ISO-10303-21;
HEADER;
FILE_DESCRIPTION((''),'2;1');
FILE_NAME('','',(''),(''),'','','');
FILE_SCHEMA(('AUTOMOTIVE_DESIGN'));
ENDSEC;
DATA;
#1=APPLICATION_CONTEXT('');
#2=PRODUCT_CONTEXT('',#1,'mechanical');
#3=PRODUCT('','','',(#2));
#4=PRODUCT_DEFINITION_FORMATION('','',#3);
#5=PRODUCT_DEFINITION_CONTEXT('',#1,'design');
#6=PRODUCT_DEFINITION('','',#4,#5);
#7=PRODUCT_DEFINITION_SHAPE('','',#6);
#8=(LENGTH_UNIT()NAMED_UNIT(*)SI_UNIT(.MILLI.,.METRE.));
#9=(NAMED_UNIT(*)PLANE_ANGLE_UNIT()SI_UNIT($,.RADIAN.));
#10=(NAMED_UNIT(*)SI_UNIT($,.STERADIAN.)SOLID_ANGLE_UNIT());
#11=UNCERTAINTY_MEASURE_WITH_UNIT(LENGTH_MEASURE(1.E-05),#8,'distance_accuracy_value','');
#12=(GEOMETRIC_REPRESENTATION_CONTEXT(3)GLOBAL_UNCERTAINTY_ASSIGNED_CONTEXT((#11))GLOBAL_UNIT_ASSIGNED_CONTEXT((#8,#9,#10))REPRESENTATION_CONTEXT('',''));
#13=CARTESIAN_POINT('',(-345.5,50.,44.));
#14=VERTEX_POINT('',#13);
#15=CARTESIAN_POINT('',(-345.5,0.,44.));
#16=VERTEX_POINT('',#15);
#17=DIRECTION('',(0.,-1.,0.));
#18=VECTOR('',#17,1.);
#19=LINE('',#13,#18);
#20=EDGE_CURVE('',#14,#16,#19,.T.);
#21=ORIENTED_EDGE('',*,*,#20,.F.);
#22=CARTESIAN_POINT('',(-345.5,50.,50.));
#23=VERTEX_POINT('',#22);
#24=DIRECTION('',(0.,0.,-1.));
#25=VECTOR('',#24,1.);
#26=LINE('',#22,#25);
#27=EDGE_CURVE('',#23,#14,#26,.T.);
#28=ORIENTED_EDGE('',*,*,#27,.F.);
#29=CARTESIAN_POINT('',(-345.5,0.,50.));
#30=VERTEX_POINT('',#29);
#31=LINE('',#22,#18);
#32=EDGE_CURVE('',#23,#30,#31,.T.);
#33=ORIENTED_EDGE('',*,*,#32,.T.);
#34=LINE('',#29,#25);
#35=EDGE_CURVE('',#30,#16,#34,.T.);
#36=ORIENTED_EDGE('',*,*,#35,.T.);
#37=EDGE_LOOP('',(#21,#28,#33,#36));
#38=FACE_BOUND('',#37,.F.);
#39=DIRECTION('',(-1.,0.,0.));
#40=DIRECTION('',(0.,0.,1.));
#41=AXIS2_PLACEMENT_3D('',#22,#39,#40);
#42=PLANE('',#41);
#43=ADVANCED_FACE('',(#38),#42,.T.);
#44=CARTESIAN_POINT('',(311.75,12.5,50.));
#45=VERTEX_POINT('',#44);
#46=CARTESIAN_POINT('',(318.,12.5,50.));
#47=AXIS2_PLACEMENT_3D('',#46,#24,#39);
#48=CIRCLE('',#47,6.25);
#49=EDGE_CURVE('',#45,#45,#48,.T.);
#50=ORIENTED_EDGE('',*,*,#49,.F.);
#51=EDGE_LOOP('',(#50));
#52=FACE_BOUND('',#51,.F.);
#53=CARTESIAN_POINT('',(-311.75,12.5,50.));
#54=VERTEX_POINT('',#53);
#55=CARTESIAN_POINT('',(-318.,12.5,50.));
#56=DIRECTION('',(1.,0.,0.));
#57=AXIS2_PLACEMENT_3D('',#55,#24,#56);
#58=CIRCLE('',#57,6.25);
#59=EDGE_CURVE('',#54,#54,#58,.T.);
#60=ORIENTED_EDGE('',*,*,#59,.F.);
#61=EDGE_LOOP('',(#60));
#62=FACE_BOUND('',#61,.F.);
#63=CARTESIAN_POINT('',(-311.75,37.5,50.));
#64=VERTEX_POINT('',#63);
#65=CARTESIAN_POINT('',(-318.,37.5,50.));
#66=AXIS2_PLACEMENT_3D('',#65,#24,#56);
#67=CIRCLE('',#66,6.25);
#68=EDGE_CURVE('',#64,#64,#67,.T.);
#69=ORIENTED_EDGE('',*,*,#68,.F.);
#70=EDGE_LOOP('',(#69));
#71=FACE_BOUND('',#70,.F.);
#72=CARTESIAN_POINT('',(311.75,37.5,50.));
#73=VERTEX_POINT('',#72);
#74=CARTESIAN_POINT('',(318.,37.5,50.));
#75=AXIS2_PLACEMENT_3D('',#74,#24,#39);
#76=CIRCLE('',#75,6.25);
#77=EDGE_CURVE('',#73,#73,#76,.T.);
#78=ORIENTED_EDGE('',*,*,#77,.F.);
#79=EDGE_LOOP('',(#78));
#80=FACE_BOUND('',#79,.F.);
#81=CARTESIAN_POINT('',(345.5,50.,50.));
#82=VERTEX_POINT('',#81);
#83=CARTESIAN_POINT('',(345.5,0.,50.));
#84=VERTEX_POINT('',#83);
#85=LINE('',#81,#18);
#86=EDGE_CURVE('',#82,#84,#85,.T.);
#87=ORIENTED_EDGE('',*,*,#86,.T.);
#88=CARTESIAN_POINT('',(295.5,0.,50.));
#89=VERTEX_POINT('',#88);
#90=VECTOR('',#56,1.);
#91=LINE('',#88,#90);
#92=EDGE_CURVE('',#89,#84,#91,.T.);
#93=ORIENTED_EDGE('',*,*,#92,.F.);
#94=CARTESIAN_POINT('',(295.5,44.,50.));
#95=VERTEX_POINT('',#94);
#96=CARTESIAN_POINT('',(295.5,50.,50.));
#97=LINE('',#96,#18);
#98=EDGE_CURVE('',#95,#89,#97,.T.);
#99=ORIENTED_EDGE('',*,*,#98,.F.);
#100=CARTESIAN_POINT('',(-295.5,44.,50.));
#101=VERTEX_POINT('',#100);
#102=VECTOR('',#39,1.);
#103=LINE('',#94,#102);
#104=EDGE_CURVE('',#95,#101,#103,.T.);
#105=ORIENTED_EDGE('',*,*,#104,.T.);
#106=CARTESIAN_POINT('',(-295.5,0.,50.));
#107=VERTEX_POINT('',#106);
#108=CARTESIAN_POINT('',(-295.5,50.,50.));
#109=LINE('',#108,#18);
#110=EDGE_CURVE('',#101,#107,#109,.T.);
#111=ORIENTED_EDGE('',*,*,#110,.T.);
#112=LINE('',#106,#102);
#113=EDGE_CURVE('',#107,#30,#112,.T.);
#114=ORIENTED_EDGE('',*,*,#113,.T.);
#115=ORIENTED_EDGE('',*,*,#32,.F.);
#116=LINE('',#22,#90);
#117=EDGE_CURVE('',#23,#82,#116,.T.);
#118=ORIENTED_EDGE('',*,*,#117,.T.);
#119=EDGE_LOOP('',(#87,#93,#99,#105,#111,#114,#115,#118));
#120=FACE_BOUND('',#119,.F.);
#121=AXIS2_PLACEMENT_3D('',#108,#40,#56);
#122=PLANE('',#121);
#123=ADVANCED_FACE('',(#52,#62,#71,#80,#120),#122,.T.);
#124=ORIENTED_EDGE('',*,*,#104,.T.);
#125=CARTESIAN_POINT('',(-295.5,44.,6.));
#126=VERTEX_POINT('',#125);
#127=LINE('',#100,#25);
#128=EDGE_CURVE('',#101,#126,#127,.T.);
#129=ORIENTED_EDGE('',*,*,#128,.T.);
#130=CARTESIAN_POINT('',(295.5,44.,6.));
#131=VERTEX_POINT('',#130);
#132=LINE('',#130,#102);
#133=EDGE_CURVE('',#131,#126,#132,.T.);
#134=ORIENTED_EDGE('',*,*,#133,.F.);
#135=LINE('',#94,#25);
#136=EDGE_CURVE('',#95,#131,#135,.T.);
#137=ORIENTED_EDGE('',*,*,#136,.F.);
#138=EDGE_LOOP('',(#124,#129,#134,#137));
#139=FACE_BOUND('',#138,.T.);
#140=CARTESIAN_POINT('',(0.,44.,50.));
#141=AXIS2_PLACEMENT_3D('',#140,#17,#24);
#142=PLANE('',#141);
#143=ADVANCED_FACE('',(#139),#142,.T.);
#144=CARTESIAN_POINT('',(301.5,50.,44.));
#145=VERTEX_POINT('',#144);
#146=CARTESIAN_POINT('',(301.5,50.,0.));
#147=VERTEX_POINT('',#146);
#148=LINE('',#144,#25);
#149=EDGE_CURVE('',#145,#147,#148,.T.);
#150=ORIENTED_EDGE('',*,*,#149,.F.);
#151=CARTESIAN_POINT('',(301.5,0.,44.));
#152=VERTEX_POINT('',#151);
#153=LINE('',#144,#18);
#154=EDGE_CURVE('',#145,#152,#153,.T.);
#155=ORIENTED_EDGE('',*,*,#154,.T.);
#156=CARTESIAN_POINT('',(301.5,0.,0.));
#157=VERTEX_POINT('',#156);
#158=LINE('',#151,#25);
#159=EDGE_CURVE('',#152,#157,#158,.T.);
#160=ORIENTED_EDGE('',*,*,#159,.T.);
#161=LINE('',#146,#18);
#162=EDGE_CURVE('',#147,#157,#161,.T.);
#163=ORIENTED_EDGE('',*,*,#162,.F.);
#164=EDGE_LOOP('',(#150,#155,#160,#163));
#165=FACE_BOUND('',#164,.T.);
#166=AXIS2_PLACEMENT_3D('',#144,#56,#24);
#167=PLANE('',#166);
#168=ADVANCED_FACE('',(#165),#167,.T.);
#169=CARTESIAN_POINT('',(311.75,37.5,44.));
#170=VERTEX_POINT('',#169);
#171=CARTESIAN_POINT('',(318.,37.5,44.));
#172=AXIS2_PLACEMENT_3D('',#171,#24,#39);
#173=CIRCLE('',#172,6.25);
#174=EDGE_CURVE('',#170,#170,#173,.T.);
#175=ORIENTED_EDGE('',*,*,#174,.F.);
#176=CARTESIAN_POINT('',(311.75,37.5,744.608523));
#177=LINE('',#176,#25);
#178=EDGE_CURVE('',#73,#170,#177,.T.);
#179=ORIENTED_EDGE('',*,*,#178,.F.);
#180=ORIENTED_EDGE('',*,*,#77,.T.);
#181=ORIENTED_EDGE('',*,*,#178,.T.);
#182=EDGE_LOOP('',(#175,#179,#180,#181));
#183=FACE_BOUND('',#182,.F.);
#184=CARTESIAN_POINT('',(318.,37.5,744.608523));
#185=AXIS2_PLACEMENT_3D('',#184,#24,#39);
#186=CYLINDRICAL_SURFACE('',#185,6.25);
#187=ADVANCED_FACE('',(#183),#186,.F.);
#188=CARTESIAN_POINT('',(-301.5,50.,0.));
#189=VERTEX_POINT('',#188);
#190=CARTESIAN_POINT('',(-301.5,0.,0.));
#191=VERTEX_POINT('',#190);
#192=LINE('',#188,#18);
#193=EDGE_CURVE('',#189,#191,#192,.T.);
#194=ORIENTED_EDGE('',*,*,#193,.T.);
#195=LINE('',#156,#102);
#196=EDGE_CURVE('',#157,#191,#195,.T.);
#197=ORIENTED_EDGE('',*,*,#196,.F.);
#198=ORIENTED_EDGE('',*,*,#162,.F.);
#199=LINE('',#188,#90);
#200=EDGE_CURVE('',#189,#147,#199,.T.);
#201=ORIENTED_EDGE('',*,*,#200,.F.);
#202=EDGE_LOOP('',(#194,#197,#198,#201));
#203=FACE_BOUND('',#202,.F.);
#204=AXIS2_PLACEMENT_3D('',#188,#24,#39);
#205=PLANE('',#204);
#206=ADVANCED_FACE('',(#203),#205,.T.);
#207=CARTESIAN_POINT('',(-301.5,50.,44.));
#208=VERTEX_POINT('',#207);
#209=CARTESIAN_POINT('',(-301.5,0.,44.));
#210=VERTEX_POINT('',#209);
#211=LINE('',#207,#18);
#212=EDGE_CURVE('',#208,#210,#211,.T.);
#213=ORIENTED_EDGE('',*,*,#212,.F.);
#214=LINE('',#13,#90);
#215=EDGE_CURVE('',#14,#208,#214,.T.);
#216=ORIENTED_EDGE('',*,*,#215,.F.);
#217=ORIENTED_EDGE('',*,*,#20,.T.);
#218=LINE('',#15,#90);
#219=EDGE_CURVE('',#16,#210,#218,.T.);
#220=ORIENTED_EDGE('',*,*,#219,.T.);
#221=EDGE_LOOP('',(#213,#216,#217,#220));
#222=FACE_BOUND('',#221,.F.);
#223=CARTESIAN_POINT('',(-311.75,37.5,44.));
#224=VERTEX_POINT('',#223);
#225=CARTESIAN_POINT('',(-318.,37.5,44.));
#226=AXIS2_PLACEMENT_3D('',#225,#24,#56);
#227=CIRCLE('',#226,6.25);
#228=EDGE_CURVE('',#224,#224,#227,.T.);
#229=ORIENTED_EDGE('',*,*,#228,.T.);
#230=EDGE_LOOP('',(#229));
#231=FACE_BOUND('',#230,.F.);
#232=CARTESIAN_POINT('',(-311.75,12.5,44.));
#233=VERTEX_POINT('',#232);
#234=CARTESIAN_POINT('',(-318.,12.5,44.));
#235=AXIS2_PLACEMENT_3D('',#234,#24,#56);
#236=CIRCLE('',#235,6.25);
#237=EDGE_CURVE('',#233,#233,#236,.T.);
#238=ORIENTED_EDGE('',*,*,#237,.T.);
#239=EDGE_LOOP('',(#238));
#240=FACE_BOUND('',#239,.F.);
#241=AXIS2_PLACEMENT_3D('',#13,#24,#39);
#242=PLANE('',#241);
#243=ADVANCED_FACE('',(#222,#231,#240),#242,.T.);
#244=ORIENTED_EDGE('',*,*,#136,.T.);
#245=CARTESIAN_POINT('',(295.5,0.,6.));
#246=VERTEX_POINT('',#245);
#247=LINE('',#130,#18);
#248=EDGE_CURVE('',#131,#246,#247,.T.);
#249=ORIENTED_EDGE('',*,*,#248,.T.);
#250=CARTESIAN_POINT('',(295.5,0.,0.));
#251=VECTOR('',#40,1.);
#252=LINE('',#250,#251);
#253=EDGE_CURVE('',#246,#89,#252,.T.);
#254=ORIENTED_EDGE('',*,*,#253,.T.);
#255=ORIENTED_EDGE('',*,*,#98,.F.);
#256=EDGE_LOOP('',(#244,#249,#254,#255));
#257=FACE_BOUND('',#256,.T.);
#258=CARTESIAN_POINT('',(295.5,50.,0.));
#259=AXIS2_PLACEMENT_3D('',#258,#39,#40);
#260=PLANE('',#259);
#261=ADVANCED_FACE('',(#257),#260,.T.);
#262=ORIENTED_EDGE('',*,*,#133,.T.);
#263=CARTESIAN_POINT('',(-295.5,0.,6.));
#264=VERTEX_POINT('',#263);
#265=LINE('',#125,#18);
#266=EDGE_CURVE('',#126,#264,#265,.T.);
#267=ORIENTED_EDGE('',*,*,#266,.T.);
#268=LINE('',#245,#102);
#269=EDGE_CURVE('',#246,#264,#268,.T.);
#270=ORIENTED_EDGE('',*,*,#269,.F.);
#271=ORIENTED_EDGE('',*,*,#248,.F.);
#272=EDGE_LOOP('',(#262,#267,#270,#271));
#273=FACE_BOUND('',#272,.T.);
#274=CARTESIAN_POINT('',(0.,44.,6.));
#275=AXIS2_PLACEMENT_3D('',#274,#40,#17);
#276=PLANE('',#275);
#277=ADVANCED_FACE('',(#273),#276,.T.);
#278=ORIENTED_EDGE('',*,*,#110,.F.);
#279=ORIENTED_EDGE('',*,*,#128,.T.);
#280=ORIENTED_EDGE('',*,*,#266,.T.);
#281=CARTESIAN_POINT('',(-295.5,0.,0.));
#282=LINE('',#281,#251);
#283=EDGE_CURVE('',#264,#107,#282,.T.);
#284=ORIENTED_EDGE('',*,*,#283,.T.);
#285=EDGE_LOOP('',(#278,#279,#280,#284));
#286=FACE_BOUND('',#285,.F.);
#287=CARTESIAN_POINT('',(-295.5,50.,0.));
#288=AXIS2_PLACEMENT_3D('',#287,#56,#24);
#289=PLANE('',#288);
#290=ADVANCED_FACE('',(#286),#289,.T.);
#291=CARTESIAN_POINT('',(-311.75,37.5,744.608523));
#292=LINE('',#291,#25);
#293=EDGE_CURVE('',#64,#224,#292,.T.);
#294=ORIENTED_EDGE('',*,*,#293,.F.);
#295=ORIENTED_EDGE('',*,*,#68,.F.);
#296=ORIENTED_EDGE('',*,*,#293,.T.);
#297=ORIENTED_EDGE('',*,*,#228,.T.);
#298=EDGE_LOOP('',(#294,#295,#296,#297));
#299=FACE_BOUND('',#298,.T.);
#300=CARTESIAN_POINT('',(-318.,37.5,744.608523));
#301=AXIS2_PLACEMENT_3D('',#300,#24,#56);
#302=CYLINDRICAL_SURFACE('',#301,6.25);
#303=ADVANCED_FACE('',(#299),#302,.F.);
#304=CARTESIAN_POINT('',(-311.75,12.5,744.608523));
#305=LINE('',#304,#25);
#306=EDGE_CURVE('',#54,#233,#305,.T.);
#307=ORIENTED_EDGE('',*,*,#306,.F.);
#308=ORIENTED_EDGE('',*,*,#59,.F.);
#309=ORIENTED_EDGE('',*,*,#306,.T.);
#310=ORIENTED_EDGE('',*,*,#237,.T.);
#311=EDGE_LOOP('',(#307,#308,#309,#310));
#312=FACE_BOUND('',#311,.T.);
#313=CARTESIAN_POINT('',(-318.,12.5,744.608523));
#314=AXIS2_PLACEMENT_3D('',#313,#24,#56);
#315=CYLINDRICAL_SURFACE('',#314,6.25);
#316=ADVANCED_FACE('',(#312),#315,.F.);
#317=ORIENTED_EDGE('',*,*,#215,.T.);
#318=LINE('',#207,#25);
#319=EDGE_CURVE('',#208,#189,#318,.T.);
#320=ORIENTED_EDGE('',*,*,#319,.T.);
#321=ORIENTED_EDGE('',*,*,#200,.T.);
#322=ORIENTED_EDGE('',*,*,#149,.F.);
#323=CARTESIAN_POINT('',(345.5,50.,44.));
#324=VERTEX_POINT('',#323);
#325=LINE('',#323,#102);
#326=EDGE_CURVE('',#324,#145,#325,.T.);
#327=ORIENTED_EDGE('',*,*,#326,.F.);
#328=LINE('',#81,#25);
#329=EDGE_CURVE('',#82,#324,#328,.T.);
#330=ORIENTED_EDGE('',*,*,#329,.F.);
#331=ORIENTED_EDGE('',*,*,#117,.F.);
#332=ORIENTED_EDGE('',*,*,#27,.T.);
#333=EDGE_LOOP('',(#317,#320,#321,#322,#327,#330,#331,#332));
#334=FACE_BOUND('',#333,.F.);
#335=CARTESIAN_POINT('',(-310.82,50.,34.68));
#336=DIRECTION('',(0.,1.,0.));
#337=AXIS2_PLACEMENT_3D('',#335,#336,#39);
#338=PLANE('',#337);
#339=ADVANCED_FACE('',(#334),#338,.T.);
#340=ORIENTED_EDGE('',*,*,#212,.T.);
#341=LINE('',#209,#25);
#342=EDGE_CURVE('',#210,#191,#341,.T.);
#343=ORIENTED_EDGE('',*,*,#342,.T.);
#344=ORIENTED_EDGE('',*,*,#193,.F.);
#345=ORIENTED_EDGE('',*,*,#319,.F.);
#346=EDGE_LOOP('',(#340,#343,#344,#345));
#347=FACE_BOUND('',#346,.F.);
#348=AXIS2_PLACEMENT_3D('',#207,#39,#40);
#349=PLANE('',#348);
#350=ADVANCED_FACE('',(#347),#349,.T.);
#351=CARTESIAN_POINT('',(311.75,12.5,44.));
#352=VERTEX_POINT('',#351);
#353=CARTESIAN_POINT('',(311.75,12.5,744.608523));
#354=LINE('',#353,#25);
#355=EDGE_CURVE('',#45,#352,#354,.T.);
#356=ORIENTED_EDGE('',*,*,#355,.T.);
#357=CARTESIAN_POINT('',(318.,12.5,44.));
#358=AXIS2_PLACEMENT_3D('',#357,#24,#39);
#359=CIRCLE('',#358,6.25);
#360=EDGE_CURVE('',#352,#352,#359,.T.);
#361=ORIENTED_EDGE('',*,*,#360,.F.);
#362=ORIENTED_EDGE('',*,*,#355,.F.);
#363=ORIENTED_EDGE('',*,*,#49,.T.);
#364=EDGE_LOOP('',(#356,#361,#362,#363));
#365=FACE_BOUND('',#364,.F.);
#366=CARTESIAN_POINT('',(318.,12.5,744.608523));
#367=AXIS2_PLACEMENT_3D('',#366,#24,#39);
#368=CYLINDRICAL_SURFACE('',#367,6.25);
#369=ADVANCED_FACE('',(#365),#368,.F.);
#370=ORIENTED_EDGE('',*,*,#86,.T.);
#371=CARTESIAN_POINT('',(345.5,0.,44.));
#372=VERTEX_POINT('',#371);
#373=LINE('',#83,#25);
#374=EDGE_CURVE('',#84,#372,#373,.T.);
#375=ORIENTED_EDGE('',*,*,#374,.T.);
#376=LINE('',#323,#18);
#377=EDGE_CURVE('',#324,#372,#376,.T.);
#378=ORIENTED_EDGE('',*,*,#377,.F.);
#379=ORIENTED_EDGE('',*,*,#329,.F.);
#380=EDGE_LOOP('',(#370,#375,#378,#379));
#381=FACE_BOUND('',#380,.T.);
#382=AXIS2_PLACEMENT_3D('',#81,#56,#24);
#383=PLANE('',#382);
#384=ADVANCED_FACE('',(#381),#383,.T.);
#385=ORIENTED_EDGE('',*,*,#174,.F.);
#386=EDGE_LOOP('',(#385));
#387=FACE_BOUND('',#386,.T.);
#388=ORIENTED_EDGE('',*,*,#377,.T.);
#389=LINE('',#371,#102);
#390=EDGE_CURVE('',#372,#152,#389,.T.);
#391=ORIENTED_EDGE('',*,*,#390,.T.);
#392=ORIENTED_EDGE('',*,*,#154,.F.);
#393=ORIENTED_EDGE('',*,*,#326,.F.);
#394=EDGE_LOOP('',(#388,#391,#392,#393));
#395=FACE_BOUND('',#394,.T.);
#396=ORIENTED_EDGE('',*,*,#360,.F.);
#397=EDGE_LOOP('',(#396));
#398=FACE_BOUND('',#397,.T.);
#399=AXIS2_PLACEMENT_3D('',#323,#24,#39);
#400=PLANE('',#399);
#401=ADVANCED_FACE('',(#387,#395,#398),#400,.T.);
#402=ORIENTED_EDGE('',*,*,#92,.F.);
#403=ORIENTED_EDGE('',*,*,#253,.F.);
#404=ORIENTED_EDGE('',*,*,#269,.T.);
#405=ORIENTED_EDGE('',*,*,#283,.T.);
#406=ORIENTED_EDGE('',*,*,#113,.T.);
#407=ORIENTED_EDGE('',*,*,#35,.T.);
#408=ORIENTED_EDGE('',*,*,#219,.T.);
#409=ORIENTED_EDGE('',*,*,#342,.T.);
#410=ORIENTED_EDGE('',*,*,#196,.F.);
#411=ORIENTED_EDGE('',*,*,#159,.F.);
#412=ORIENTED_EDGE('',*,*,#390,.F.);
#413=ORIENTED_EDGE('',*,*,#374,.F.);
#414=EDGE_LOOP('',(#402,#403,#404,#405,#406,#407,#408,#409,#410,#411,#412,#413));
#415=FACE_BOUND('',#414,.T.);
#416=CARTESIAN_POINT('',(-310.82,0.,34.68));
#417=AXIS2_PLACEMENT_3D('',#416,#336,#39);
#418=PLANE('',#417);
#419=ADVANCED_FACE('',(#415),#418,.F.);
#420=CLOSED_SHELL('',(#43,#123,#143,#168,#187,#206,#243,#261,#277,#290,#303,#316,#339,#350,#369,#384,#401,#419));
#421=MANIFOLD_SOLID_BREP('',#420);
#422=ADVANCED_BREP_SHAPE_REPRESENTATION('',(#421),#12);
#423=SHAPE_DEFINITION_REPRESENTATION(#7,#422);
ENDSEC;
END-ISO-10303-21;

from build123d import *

# Parameters (mm, degrees)
F1_DEPTH = 295.5
F3_DEPTH = 50
F5_D     = 12.5


# Not quite as in the source:
# - a pattern or mirror of a feature is missing from the dataset's text; its kind, count and spacing are read off the source's solid


with BuildPart() as f1:
    # F0 (on Right) → F1 (new body, symmetric)
    with BuildSketch(Plane.YZ):
        Polygon((0, 6), (0, 0), (50, 0), (50, 50), (44, 50), (44, 6), align=None)
    extrude(amount=F1_DEPTH, both=True)

    # F2 (on face) → F3 (join)
    with BuildSketch(Plane(origin=(0, 50, 0), x_dir=(-1, 0, 0), z_dir=(0, 1, 0))):
        Polygon((-301.5, 0), (-295.5, 0), (-295.5, 50), (-345.5, 50), (-345.5, 44), (-301.5, 44), align=None)
    f3 = extrude(amount=-F3_DEPTH)

    # F3_copies: F3 across plane
    add(f3.mirror(Plane(origin=(0, 0, 0), x_dir=(0, 0, -1), z_dir=(-1, 0, 0))))

    # F5 (through all)
    with Locations(Plane.XY.offset(50)):
        with Locations((318, 37.5), (318, 12.5)):
            f5 = Hole(F5_D / 2)

    # F5_copies: F5 across plane
    add(f5.mirror(Plane(origin=(0, 0, 0), x_dir=(0, 0, -1), z_dir=(-1, 0, 0))), mode=Mode.SUBTRACT)


solid = f1.part
